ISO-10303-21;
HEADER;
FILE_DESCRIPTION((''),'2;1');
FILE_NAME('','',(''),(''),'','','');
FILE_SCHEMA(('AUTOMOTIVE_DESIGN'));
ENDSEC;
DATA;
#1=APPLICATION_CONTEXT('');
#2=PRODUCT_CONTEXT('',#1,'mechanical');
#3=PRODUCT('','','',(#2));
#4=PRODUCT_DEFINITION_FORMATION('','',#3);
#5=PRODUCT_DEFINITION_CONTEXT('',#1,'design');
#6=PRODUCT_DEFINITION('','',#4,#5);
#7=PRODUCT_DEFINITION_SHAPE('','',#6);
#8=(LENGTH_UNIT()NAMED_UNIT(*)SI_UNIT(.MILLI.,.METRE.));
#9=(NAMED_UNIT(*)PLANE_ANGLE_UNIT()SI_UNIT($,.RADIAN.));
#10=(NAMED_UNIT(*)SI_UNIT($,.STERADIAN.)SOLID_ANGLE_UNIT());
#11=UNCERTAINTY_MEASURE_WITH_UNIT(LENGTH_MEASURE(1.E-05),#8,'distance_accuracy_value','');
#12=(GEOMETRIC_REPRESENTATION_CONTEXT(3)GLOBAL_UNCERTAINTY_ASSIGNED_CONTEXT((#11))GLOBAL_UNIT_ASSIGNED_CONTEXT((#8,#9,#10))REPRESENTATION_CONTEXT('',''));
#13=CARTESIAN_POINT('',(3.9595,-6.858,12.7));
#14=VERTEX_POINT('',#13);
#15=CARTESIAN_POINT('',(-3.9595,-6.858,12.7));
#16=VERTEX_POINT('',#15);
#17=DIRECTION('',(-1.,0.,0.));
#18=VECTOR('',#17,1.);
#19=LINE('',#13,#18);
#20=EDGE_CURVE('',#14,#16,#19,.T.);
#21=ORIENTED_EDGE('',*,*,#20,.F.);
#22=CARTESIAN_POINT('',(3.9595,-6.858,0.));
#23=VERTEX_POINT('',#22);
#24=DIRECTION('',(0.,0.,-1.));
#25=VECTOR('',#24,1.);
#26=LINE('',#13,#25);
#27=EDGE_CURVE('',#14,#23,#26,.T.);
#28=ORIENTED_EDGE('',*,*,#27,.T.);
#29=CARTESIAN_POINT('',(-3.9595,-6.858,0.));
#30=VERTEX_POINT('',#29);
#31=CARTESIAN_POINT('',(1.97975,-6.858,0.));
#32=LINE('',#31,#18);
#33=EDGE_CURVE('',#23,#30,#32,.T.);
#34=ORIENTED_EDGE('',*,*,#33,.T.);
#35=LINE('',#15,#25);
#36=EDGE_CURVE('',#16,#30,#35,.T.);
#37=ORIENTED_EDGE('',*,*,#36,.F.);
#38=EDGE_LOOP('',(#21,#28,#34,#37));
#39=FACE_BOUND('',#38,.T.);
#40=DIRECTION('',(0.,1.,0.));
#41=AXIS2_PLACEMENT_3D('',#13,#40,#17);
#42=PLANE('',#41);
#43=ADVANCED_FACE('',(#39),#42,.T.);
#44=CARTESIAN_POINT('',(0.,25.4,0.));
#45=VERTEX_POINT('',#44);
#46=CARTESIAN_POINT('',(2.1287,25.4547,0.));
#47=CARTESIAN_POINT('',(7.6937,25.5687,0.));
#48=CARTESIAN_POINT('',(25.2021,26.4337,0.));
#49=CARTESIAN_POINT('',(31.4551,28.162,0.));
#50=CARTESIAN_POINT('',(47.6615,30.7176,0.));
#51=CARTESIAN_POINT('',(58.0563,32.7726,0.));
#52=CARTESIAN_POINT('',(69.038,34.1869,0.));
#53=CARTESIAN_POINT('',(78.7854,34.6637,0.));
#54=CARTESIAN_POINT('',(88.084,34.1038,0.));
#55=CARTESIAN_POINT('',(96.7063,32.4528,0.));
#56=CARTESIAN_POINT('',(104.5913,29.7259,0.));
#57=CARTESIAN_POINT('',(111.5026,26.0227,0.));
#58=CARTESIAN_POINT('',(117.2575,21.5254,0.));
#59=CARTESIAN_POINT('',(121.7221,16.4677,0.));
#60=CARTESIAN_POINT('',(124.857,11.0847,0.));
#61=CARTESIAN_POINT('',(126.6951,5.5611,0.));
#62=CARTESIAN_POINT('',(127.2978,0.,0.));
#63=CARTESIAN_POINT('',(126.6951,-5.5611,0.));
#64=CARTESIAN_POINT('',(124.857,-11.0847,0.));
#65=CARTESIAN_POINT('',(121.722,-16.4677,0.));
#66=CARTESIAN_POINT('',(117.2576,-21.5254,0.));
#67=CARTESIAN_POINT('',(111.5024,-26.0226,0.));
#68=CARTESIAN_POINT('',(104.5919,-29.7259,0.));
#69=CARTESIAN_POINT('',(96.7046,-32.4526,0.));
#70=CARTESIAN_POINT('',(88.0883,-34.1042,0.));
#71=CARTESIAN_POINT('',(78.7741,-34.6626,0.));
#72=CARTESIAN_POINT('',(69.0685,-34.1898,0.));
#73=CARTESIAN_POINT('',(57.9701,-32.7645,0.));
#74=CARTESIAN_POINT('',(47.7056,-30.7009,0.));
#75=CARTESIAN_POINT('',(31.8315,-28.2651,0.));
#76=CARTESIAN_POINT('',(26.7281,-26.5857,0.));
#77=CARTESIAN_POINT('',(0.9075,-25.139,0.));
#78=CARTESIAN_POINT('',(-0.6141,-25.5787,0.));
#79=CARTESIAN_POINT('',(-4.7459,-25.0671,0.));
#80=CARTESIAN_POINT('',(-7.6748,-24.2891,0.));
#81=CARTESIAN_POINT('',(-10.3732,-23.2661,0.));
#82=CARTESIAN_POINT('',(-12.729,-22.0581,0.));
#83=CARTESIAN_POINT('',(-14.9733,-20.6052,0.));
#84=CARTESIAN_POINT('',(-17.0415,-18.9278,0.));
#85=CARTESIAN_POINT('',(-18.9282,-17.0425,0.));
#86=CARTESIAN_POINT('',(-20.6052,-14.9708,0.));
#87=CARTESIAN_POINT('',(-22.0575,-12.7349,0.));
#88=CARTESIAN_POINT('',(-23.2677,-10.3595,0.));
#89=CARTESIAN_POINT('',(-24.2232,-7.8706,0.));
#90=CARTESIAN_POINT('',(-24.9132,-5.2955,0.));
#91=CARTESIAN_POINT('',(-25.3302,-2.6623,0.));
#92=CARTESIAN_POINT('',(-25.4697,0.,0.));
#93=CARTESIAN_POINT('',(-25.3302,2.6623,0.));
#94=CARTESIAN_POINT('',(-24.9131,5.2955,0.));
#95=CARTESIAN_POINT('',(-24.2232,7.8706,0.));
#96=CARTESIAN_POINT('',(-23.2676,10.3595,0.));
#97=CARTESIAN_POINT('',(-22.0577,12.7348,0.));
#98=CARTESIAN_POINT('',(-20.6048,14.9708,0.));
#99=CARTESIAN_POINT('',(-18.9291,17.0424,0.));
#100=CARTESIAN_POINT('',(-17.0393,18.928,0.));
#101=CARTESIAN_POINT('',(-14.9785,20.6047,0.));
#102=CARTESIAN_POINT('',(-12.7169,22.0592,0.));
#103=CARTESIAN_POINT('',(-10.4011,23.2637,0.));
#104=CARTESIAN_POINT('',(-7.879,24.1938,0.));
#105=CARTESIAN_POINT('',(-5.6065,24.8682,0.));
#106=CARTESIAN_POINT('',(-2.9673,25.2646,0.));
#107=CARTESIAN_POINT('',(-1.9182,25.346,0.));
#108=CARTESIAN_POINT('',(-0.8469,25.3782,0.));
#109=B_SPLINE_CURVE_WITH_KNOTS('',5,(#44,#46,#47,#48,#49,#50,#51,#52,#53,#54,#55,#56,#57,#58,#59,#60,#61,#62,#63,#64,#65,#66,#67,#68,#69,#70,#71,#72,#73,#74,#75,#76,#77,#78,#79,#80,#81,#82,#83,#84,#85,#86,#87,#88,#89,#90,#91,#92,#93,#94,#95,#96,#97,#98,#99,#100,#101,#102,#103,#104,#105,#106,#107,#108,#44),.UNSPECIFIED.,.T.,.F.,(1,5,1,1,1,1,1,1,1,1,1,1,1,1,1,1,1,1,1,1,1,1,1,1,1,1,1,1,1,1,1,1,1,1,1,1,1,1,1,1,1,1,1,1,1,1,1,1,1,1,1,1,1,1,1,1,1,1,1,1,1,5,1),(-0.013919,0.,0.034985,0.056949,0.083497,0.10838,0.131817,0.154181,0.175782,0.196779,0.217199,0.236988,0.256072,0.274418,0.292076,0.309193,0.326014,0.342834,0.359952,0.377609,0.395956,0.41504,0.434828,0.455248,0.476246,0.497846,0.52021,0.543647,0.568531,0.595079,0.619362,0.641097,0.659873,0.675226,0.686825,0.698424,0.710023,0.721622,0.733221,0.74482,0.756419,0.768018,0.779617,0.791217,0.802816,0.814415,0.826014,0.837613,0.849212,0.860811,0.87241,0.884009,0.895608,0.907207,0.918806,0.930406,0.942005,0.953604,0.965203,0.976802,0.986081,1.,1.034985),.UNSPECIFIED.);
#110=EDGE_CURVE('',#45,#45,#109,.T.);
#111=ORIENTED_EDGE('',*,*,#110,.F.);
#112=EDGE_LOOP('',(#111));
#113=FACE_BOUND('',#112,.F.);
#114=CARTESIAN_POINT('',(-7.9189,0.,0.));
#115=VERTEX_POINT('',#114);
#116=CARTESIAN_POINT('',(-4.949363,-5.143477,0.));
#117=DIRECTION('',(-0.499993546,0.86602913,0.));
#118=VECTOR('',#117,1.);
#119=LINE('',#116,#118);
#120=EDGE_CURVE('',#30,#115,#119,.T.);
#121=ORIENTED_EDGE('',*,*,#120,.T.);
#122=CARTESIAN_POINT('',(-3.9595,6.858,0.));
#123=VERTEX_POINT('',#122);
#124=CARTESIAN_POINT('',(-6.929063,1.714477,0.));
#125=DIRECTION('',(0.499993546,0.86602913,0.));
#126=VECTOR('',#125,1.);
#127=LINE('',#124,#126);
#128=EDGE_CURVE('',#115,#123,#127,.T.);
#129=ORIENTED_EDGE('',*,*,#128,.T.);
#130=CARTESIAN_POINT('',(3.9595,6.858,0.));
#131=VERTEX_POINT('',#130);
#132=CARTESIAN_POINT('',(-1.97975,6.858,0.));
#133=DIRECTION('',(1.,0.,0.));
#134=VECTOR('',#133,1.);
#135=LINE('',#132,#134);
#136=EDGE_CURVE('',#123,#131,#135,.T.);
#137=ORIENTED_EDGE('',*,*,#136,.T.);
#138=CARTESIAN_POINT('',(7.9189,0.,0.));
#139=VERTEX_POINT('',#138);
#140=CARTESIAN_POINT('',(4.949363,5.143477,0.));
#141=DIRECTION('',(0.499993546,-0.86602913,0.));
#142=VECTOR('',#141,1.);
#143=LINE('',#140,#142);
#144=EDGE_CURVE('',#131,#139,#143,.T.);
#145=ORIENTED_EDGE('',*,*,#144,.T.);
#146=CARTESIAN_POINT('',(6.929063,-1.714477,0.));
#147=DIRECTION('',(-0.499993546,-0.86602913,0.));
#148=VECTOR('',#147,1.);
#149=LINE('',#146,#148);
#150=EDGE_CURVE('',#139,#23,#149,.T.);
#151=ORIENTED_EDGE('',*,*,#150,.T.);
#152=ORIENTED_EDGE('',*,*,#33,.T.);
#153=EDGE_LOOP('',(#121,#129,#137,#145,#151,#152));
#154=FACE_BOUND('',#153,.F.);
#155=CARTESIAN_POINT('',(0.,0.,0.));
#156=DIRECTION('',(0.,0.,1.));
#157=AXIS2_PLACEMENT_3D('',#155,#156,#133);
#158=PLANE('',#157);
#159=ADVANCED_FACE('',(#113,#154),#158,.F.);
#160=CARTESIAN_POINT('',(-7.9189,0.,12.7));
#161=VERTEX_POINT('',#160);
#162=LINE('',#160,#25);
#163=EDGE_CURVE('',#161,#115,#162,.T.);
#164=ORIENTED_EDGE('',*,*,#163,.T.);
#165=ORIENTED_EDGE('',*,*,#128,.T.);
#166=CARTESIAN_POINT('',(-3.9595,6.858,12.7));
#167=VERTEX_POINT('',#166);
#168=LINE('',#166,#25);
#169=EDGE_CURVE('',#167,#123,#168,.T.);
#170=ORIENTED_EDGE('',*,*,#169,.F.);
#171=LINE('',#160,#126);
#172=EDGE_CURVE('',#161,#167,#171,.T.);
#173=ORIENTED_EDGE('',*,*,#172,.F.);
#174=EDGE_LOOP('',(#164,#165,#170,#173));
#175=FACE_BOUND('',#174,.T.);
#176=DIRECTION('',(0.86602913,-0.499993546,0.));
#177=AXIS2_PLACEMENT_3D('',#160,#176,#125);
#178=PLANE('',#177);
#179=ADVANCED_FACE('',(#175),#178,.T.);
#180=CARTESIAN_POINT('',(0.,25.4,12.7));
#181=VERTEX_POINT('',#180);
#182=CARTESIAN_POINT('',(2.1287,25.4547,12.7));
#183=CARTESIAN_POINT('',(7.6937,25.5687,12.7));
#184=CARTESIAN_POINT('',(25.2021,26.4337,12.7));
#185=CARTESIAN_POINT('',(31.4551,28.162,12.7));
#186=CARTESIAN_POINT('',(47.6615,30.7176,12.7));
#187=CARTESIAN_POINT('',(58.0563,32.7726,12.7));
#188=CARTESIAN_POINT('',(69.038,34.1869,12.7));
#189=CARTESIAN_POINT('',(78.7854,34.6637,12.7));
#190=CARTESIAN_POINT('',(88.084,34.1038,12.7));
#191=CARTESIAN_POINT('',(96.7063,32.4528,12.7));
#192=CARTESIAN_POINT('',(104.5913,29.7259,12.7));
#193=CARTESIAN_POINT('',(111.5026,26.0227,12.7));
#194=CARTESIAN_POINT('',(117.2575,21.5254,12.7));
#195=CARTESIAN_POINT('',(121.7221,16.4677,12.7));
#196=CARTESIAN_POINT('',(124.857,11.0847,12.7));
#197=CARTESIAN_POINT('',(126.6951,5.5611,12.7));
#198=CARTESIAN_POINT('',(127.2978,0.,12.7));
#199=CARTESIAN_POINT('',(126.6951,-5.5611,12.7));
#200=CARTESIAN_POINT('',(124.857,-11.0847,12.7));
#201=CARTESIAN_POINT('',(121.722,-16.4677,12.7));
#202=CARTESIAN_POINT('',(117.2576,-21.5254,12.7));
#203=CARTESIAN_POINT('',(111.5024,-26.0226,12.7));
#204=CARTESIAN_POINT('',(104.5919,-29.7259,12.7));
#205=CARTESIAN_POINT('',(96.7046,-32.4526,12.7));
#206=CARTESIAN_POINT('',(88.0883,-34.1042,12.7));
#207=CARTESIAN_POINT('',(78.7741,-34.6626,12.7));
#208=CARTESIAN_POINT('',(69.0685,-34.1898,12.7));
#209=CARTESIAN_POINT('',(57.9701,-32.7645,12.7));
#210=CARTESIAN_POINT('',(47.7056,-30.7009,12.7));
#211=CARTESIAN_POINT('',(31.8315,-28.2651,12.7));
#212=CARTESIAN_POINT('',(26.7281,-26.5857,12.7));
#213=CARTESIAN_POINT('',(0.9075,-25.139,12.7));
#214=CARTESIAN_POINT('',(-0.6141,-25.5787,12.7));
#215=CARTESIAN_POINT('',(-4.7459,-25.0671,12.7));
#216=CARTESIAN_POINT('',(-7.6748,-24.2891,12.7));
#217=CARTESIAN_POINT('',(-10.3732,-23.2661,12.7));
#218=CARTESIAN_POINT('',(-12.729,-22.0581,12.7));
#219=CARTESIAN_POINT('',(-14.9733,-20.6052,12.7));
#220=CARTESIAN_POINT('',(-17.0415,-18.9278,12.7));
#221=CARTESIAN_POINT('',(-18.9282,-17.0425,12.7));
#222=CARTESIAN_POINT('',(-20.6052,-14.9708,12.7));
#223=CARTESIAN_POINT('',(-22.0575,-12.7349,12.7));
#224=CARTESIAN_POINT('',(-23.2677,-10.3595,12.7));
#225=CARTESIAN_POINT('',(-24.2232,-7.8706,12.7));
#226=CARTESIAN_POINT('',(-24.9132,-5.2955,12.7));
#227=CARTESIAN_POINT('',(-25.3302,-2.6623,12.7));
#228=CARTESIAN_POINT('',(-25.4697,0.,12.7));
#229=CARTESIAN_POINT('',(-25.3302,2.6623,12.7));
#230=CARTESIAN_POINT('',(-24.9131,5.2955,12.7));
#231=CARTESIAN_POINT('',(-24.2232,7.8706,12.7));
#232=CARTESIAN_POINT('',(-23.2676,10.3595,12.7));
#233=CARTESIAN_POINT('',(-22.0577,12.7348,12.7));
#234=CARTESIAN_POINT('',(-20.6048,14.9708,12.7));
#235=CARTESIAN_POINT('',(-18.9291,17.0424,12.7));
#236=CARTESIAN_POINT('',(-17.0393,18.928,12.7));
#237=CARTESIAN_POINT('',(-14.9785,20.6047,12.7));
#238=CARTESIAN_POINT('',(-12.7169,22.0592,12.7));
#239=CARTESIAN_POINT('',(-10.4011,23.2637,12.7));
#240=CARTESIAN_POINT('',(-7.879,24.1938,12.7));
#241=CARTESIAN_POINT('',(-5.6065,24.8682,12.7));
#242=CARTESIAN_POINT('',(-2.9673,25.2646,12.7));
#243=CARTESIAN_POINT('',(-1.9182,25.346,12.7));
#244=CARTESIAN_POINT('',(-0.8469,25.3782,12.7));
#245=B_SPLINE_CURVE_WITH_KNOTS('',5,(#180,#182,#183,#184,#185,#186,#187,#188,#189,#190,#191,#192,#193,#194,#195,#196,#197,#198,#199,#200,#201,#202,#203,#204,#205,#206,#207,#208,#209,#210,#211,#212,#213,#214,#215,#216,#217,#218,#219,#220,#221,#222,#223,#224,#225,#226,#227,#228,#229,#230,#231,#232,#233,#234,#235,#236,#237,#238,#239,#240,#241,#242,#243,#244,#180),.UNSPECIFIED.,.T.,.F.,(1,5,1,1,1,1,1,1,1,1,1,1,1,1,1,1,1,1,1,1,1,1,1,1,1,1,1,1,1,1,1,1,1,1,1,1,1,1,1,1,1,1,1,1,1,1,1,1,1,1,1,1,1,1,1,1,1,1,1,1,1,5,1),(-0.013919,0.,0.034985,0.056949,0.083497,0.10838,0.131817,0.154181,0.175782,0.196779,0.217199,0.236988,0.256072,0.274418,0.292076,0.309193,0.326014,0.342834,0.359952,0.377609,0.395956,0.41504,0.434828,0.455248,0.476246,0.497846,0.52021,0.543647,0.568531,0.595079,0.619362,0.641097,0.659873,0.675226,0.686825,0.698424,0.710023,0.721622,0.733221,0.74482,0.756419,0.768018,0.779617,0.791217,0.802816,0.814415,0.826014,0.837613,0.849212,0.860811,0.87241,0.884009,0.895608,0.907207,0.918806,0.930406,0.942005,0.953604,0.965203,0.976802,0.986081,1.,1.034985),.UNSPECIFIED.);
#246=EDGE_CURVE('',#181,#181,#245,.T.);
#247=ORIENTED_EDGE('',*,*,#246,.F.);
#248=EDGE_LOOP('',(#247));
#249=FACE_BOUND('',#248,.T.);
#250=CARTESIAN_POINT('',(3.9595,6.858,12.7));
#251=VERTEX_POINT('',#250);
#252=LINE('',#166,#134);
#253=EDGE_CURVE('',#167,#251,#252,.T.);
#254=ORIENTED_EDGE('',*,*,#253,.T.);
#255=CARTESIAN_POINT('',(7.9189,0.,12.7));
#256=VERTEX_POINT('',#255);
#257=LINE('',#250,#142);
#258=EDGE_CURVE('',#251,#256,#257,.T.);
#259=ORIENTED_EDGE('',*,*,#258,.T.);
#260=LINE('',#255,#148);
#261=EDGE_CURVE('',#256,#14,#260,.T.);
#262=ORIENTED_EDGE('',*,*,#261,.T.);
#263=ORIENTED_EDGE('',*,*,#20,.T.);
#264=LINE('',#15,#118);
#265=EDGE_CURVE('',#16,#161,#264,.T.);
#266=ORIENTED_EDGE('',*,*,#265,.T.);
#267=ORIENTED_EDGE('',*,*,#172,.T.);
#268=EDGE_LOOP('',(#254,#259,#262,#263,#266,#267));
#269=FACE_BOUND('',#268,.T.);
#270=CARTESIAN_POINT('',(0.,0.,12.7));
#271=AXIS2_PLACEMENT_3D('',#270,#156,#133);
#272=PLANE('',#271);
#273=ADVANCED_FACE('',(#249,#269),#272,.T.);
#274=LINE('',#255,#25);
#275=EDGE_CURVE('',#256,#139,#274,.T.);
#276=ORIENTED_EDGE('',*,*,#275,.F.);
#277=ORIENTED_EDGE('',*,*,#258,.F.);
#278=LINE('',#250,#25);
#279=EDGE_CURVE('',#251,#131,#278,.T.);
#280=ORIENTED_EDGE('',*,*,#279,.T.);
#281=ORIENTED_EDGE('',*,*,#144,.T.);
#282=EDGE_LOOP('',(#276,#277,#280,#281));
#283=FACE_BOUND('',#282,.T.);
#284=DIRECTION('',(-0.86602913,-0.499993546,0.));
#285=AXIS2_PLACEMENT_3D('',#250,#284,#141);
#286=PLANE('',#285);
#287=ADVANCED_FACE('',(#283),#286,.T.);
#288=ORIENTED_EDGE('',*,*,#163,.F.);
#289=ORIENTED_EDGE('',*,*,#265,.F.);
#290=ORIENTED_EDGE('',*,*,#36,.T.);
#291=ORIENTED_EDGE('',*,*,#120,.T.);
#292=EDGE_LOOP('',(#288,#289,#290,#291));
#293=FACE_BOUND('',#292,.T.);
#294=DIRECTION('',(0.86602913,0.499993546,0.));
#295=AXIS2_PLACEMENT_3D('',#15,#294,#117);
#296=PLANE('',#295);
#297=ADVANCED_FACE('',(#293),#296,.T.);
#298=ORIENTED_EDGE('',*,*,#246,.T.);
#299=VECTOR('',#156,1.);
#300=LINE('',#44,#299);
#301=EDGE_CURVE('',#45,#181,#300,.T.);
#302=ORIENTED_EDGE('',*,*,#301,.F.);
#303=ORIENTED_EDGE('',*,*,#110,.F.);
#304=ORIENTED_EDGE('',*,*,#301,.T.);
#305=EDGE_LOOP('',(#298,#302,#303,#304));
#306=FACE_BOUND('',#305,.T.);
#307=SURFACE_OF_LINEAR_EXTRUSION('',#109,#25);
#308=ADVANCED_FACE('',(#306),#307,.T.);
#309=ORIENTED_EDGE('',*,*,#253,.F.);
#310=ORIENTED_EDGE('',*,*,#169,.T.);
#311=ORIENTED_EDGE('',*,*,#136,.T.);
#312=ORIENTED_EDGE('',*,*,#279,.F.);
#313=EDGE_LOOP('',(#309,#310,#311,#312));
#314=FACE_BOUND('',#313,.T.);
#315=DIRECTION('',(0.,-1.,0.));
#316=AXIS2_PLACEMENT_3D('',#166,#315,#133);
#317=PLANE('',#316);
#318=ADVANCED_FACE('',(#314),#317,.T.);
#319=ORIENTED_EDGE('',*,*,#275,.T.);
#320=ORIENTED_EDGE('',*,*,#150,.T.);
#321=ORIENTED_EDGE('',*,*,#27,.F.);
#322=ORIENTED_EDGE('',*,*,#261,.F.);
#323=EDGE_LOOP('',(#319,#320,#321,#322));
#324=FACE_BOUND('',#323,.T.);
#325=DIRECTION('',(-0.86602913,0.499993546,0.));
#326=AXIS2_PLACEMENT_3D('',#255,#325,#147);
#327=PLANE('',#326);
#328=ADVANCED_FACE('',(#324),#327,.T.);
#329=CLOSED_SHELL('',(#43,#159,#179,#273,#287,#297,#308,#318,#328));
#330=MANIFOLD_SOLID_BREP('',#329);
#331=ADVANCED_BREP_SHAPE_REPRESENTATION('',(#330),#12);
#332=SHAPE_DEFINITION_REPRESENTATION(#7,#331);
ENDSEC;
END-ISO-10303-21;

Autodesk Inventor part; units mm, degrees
ref_plane "YZ Plane" through (0, 0, 0) normal (1, 0, 0) x (0, 1, 0)
ref_plane "XZ Plane" through (0, 0, 0) normal (0, 1, 0) x (-1, 0, 0)
sketch "Main Sketch" plane through (0, 0, 0) normal (0, 0, 1) x (1, 0, 0)
  spline S0 degree 5 poles (0, 25.4) (2.1287, 25.4547) (7.6937, 25.5687) (25.2021, 26.4337) (31.4551, 28.162) (47.6615, 30.7176) (58.0563, 32.7726) (69.038, 34.1869) (78.7854, 34.6637) (88.084, 34.1038) (96.7063, 32.4528) (104.5913, 29.7259) (111.5026, 26.0227) (117.2575, 21.5254) (121.7221, 16.4677) (124.857, 11.0847) (126.6951, 5.5611) (127.2978, 0) (126.6951, -5.5611) (124.857, -11.0847) (121.722, -16.4677) (117.2576, -21.5254) (111.5024, -26.0226) (104.5919, -29.7259) (96.7046, -32.4526) (88.0883, -34.1042) (78.7741, -34.6626) (69.0685, -34.1898) (57.9701, -32.7645) (47.7056, -30.7009) (31.8315, -28.2651) (26.7281, -26.5857) (0.9075, -25.139) (-0.6141, -25.5787) (-4.7459, -25.0671) (-7.6748, -24.2891) (-10.3732, -23.2661) (-12.729, -22.0581) (-14.9733, -20.6052) (-17.0415, -18.9278) (-18.9282, -17.0425) (-20.6052, -14.9708) (-22.0575, -12.7349) (-23.2677, -10.3595) (-24.2232, -7.8706) (-24.9132, -5.2955) (-25.3302, -2.6623) (-25.4697, 0) (-25.3302, 2.6623) (-24.9131, 5.2955) (-24.2232, 7.8706) (-23.2676, 10.3595) (-22.0577, 12.7348) (-20.6048, 14.9708) (-18.9291, 17.0424) (-17.0393, 18.928) (-14.9785, 20.6047) (-12.7169, 22.0592) (-10.4011, 23.2637) (-7.879, 24.1938) (-5.6065, 24.8682) (-2.9673, 25.2646) (-1.9182, 25.346) (-0.8469, 25.3782) (0, 25.4) knots 0 0 0 0 0 0 0.034985 0.056949 0.083497 0.10838 0.131817 0.154181 0.175782 0.196779 0.217199 0.236988 0.256072 0.274418 0.292076 0.309193 0.326014 0.342834 0.359952 0.377609 0.395956 0.41504 0.434828 0.455248 0.476246 0.497846 0.52021 0.543647 0.568531 0.595079 0.619362 0.641097 0.659873 0.675226 0.686825 0.698424 0.710023 0.721622 0.733221 0.74482 0.756419 0.768018 0.779617 0.791217 0.802816 0.814415 0.826014 0.837613 0.849212 0.860811 0.87241 0.884009 0.895608 0.907207 0.918806 0.930406 0.942005 0.953604 0.965203 0.976802 0.986081 1 1 1 1 1 1
  point P0 (34.3511, 28.4773)
  point P1 (47.9087, 30.8624)
  point P2 (59.4553, 32.8129)
  point P3 (69.7636, 34.0431)
  point P4 (79.3599, 34.4006)
  point P5 (88.4593, 33.7633)
  point P6 (97.0267, 32.0479)
  point P7 (104.869, 29.2522)
  point P8 (111.7328, 25.4833)
  point P9 (117.3941, 20.9508)
  point P10 (121.7242, 15.9225)
  point P11 (124.7128, 10.6545)
  point P12 (126.4389, 5.3238)
  point P13 (127, 0)
  point P14 (126.4389, -5.3238)
  point P15 (124.7128, -10.6545)
  point P16 (121.7242, -15.9225)
  point P17 (117.3941, -20.9508)
  point P18 (111.7328, -25.4833)
  point P19 (104.869, -29.2522)
  point P20 (97.0267, -32.0479)
  point P21 (88.4593, -33.7633)
  point P22 (79.3599, -34.4006)
  point P23 (69.7636, -34.0431)
  point P24 (59.4553, -32.8129)
  point P25 (47.9087, -30.8624)
  point P26 (34.3511, -28.4773)
  point P27 (18.2006, -26.3139)
  point P28 (0, -25.4)
  point P29 (-2.655, -25.2609)
  point P30 (-5.281, -24.8449)
  point P31 (-7.849, -24.1568)
  point P32 (-10.3311, -23.2041)
  point P33 (-12.7, -21.997)
  point P34 (-14.9297, -20.549)
  point P35 (-16.9959, -18.8759)
  point P36 (-18.8759, -16.9959)
  point P37 (-20.549, -14.9297)
  point P38 (-21.997, -12.7)
  point P39 (-23.2041, -10.3311)
  point P40 (-24.1568, -7.849)
  point P41 (-24.8449, -5.281)
  point P42 (-25.2609, -2.655)
  point P43 (-25.4, 0)
  point P44 (-25.2609, 2.655)
  point P45 (-24.8449, 5.281)
  point P46 (-24.1568, 7.849)
  point P47 (-23.2041, 10.3311)
  point P48 (-21.997, 12.7)
  point P49 (-20.549, 14.9297)
  point P50 (-18.8759, 16.9959)
  point P51 (-16.9959, 18.8759)
  point P52 (-14.9297, 20.549)
  point P53 (-12.7, 21.997)
  point P54 (-10.3311, 23.2041)
  point P55 (-7.849, 24.1568)
  point P56 (-5.281, 24.8449)
  point P57 (-2.655, 25.2609)
extrude "Cam" add sketch "Main Sketch" along normal blind 12.7
sketch "Sketch2" plane through (0, 0, 12.7) normal (0, 0, 1) x (1, 0, 0)
  line L0 (7.9189, 0) -> (3.9595, -6.858)
  line L1 (3.9595, -6.858) -> (-3.9595, -6.858)
  line L2 (-3.9595, -6.858) -> (-7.9189, 0)
  line L3 (-7.9189, 0) -> (-3.9595, 6.858)
  line L4 (-3.9595, 6.858) -> (3.9595, 6.858)
  line L5 (3.9595, 6.858) -> (7.9189, 0)
  point P0 (0, 0)
  point P1 (0, 0)
  dimension "d4" = 13.716
extrude "Extrusion2" cut sketch "Sketch2" against normal through all
ref_plane "Work Plane1" through (0, 0, 6.35) normal (0, 0, 1) x (1, 0, 0)
properties part number "Disc Cam" material "Stainless Steel, Austenitic"
